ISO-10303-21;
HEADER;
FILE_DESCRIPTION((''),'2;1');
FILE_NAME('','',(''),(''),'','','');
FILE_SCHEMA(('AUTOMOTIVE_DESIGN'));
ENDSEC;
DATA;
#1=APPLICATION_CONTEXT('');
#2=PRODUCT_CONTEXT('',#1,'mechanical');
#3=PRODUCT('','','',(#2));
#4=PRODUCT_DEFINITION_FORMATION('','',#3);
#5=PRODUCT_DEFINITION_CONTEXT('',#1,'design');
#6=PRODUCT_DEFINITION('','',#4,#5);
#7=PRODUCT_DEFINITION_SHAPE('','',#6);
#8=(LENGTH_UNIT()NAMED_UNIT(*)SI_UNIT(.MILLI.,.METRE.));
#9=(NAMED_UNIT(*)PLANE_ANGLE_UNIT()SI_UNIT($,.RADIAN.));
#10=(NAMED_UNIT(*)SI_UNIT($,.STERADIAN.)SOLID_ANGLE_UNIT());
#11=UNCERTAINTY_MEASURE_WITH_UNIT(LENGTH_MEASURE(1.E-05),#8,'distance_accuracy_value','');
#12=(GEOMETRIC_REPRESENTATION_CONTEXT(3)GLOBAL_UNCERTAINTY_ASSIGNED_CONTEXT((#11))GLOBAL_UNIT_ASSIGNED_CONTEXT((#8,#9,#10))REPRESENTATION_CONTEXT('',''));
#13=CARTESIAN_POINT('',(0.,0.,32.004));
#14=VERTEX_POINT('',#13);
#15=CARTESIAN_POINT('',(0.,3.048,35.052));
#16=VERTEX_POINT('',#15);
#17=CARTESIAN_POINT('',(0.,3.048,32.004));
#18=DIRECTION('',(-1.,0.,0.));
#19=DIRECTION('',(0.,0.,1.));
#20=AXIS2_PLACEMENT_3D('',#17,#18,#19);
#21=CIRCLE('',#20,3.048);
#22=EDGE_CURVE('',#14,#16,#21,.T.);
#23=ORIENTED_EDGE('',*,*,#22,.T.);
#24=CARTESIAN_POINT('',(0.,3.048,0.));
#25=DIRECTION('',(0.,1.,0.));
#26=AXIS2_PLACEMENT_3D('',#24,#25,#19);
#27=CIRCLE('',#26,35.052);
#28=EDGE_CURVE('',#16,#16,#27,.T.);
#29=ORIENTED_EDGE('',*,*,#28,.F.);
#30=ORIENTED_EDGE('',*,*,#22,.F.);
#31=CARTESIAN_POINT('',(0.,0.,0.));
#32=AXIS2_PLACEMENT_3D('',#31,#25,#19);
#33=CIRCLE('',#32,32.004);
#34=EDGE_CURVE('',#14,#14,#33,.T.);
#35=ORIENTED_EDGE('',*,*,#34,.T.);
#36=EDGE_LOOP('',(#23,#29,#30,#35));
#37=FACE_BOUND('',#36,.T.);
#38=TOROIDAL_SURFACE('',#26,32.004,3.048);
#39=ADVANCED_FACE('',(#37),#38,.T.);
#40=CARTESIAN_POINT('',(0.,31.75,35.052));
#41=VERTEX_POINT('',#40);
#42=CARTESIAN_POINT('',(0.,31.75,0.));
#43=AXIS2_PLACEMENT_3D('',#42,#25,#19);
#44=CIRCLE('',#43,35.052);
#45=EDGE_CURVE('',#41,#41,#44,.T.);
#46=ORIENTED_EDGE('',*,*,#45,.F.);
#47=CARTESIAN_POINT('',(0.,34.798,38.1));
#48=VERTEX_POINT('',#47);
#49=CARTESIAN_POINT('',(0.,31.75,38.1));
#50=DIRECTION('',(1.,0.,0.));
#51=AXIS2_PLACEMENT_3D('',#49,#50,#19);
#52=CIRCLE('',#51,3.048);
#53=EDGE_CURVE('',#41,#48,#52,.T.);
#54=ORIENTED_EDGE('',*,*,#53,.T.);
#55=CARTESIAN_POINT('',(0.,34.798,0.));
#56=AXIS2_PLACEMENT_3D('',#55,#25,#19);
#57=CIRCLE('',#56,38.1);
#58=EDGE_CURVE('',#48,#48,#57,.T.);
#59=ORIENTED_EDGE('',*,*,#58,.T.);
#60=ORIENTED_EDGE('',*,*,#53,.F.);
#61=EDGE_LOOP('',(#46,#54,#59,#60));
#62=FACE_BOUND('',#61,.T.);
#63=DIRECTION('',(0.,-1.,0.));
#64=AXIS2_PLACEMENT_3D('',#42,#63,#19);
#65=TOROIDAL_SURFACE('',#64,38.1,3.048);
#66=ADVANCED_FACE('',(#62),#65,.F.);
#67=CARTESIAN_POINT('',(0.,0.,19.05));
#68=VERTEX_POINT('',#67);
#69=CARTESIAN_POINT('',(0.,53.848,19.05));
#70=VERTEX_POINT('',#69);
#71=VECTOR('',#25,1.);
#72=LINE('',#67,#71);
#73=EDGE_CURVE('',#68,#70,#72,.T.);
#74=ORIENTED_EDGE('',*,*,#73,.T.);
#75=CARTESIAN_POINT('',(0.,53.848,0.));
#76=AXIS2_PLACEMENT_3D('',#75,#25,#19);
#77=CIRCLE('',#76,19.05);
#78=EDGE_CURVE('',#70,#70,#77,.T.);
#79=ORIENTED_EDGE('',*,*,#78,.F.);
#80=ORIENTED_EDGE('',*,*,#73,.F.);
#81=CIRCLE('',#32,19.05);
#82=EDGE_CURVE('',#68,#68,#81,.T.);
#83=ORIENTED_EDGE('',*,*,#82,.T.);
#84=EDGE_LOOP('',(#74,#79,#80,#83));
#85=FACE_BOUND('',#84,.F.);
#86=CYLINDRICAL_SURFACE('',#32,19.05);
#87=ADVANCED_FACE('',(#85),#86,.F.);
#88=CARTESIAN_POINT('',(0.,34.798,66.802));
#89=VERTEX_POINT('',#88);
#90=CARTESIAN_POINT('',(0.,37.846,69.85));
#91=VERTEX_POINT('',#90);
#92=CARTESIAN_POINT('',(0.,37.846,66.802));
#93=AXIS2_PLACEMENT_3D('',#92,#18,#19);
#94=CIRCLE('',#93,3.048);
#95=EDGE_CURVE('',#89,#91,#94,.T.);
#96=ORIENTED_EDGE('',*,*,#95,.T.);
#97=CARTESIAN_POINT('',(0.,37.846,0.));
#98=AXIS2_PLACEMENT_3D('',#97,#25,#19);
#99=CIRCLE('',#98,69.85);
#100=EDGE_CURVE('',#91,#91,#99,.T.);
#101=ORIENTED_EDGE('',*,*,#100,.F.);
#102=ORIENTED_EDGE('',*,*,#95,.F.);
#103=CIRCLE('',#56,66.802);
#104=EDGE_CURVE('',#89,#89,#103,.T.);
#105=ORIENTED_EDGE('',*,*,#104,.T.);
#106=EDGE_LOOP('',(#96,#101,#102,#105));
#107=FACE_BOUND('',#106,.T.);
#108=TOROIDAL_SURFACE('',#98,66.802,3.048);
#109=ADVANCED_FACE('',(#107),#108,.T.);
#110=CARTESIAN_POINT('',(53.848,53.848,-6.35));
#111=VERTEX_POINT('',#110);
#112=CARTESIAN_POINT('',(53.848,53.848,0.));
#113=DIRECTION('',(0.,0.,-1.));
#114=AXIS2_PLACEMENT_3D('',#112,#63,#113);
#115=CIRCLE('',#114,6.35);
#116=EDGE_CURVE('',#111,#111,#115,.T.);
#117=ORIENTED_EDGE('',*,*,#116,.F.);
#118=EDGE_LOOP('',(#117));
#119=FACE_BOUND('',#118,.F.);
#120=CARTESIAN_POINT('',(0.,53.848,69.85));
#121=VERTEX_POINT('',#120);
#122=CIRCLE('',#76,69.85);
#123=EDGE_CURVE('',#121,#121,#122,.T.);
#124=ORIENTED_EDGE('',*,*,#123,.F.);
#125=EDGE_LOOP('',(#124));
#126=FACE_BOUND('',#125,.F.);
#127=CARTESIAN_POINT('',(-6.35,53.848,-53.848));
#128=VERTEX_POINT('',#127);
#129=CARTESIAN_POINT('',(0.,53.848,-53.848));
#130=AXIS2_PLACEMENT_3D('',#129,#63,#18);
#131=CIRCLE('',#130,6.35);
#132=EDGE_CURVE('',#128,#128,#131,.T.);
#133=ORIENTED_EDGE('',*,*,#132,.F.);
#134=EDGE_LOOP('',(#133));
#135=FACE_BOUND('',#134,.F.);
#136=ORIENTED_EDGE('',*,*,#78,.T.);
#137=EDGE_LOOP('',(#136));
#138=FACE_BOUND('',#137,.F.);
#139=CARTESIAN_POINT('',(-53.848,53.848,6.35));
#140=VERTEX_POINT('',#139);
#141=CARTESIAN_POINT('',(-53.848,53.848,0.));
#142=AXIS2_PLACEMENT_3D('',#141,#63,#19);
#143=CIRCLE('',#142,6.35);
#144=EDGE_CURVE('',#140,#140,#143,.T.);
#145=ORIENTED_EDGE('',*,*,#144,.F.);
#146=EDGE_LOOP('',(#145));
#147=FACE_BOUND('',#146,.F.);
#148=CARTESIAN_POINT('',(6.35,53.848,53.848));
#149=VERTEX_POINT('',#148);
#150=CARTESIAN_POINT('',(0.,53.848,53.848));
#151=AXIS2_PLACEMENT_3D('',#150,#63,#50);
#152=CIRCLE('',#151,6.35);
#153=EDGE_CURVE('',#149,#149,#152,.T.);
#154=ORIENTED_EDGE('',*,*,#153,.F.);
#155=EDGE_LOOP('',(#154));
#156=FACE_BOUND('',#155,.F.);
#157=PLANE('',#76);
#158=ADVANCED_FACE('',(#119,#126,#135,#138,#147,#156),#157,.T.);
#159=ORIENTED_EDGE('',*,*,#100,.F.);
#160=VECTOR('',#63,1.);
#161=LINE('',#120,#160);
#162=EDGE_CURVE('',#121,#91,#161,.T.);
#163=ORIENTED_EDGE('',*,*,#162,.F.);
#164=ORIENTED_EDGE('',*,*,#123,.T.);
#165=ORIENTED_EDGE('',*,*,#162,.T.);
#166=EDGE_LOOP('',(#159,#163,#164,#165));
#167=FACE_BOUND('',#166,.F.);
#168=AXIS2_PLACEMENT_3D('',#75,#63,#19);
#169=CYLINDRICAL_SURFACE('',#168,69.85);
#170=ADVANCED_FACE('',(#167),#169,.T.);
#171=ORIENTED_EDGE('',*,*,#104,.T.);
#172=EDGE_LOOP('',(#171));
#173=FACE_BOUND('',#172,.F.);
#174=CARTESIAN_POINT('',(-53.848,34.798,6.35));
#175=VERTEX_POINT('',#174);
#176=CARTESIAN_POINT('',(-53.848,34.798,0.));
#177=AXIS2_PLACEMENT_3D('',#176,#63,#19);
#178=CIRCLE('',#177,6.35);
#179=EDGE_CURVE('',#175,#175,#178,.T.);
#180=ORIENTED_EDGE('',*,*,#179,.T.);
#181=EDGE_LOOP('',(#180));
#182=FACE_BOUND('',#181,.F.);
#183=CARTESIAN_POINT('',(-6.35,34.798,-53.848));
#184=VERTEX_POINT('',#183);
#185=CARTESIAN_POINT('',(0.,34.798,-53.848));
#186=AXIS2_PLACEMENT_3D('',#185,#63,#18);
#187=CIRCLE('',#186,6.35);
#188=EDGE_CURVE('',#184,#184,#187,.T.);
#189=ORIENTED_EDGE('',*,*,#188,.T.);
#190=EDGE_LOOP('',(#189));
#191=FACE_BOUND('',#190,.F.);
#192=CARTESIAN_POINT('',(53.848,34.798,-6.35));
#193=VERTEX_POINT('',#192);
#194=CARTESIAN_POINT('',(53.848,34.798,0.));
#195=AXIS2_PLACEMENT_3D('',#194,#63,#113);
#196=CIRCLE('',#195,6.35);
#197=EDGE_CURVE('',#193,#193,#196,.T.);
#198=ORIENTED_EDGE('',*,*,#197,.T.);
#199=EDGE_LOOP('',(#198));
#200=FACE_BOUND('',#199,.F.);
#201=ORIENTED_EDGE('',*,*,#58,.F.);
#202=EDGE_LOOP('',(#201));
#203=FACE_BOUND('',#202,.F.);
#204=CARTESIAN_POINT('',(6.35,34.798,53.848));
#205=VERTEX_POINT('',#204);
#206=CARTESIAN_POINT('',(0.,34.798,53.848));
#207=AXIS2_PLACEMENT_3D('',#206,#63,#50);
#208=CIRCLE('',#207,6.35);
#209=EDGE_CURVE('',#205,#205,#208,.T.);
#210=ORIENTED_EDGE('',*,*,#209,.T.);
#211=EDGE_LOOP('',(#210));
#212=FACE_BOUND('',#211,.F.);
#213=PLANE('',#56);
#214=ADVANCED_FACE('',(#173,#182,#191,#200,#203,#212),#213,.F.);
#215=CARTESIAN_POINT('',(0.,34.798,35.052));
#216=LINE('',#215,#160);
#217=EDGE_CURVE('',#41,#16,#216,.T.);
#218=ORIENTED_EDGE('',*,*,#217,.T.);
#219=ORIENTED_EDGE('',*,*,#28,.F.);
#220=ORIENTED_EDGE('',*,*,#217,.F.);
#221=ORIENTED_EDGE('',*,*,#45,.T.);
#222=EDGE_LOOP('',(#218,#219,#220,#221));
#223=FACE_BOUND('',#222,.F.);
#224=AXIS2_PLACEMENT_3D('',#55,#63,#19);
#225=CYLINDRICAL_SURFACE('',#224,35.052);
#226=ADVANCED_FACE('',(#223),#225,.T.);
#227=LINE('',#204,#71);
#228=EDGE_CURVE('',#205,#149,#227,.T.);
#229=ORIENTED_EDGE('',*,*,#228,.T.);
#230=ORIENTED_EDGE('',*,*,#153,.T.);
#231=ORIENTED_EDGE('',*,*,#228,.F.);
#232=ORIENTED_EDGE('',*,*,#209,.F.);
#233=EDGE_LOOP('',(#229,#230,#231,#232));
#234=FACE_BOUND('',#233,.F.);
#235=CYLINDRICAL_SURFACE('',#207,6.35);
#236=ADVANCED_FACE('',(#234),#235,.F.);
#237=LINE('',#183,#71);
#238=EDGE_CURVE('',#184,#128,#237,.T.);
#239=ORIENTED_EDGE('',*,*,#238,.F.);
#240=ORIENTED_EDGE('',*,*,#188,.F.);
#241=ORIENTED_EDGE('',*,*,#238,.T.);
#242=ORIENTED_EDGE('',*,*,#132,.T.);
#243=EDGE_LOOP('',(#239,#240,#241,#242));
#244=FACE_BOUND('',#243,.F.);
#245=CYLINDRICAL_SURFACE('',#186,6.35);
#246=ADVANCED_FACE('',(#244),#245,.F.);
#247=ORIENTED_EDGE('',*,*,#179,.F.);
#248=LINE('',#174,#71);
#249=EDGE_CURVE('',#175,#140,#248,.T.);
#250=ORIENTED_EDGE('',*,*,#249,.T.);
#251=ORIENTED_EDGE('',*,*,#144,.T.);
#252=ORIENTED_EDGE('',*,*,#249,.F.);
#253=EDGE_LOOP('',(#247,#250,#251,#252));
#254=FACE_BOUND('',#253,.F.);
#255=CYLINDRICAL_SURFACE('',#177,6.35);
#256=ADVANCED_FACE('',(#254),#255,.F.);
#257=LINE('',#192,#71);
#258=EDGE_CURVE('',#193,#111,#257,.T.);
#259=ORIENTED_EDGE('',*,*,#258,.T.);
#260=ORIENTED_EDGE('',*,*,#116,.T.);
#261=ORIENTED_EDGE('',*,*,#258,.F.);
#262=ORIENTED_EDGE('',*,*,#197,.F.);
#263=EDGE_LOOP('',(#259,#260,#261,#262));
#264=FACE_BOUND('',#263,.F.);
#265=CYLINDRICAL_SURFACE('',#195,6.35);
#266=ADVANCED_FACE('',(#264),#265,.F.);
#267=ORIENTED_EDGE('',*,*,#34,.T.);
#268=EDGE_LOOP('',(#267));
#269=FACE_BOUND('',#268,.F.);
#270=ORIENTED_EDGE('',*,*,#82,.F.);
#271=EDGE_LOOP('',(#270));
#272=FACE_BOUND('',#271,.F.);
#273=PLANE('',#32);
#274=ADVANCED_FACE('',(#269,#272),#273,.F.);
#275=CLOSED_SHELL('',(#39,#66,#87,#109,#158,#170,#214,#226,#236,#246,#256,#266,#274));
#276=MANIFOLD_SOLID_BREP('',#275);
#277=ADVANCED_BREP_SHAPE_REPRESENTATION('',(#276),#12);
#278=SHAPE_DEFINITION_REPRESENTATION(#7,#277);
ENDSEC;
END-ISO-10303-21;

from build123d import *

# Parameters (mm, degrees)
F2_R            = 6.35
F3_DEPTH        = 19.051
F3_COPIES_COUNT = 4
F4_R            = 3.048


# Not quite as in the source:
# - a pattern or mirror of a feature is missing from the dataset's text; its kind, count and spacing are read off the source's solid


with BuildPart() as f1:
    # F0 (on Right) → F1 (revolve)
    with BuildSketch(Plane.YZ):
        Polygon((0, 35.052), (0, 19.05), (53.848, 19.05), (53.848, 69.85), (34.798, 69.85), (34.798, 35.052), align=None)
    revolve(axis=Axis((0, 1.9158696964, 0), (0, 1, 0)))

    # F2 (on face) → F3 (cut, through all)
    with BuildSketch(Plane.XZ.offset(-34.798)):
        with Locations((0, 53.848)):
            Circle(F2_R)
    f3 = extrude(amount=-F3_DEPTH, mode=Mode.SUBTRACT)

    # F3_copies: F3 ×4 about axis
    f3_copies_axis = Axis((0, 0, 0), (0, 1, 0))
    for i in range(1, F3_COPIES_COUNT):
        add(f3.rotate(f3_copies_axis, i * 360 / F3_COPIES_COUNT), mode=Mode.SUBTRACT)

    # F4
    f4_edges = [f1.edges().sort_by_distance(p)[0] for p in [
        (0, 34.798, -69.85),
        (0, 34.798, -35.052),
        (0, 0, -35.052),
    ]]
    fillet(f4_edges, radius=F4_R)


solid = f1.part
